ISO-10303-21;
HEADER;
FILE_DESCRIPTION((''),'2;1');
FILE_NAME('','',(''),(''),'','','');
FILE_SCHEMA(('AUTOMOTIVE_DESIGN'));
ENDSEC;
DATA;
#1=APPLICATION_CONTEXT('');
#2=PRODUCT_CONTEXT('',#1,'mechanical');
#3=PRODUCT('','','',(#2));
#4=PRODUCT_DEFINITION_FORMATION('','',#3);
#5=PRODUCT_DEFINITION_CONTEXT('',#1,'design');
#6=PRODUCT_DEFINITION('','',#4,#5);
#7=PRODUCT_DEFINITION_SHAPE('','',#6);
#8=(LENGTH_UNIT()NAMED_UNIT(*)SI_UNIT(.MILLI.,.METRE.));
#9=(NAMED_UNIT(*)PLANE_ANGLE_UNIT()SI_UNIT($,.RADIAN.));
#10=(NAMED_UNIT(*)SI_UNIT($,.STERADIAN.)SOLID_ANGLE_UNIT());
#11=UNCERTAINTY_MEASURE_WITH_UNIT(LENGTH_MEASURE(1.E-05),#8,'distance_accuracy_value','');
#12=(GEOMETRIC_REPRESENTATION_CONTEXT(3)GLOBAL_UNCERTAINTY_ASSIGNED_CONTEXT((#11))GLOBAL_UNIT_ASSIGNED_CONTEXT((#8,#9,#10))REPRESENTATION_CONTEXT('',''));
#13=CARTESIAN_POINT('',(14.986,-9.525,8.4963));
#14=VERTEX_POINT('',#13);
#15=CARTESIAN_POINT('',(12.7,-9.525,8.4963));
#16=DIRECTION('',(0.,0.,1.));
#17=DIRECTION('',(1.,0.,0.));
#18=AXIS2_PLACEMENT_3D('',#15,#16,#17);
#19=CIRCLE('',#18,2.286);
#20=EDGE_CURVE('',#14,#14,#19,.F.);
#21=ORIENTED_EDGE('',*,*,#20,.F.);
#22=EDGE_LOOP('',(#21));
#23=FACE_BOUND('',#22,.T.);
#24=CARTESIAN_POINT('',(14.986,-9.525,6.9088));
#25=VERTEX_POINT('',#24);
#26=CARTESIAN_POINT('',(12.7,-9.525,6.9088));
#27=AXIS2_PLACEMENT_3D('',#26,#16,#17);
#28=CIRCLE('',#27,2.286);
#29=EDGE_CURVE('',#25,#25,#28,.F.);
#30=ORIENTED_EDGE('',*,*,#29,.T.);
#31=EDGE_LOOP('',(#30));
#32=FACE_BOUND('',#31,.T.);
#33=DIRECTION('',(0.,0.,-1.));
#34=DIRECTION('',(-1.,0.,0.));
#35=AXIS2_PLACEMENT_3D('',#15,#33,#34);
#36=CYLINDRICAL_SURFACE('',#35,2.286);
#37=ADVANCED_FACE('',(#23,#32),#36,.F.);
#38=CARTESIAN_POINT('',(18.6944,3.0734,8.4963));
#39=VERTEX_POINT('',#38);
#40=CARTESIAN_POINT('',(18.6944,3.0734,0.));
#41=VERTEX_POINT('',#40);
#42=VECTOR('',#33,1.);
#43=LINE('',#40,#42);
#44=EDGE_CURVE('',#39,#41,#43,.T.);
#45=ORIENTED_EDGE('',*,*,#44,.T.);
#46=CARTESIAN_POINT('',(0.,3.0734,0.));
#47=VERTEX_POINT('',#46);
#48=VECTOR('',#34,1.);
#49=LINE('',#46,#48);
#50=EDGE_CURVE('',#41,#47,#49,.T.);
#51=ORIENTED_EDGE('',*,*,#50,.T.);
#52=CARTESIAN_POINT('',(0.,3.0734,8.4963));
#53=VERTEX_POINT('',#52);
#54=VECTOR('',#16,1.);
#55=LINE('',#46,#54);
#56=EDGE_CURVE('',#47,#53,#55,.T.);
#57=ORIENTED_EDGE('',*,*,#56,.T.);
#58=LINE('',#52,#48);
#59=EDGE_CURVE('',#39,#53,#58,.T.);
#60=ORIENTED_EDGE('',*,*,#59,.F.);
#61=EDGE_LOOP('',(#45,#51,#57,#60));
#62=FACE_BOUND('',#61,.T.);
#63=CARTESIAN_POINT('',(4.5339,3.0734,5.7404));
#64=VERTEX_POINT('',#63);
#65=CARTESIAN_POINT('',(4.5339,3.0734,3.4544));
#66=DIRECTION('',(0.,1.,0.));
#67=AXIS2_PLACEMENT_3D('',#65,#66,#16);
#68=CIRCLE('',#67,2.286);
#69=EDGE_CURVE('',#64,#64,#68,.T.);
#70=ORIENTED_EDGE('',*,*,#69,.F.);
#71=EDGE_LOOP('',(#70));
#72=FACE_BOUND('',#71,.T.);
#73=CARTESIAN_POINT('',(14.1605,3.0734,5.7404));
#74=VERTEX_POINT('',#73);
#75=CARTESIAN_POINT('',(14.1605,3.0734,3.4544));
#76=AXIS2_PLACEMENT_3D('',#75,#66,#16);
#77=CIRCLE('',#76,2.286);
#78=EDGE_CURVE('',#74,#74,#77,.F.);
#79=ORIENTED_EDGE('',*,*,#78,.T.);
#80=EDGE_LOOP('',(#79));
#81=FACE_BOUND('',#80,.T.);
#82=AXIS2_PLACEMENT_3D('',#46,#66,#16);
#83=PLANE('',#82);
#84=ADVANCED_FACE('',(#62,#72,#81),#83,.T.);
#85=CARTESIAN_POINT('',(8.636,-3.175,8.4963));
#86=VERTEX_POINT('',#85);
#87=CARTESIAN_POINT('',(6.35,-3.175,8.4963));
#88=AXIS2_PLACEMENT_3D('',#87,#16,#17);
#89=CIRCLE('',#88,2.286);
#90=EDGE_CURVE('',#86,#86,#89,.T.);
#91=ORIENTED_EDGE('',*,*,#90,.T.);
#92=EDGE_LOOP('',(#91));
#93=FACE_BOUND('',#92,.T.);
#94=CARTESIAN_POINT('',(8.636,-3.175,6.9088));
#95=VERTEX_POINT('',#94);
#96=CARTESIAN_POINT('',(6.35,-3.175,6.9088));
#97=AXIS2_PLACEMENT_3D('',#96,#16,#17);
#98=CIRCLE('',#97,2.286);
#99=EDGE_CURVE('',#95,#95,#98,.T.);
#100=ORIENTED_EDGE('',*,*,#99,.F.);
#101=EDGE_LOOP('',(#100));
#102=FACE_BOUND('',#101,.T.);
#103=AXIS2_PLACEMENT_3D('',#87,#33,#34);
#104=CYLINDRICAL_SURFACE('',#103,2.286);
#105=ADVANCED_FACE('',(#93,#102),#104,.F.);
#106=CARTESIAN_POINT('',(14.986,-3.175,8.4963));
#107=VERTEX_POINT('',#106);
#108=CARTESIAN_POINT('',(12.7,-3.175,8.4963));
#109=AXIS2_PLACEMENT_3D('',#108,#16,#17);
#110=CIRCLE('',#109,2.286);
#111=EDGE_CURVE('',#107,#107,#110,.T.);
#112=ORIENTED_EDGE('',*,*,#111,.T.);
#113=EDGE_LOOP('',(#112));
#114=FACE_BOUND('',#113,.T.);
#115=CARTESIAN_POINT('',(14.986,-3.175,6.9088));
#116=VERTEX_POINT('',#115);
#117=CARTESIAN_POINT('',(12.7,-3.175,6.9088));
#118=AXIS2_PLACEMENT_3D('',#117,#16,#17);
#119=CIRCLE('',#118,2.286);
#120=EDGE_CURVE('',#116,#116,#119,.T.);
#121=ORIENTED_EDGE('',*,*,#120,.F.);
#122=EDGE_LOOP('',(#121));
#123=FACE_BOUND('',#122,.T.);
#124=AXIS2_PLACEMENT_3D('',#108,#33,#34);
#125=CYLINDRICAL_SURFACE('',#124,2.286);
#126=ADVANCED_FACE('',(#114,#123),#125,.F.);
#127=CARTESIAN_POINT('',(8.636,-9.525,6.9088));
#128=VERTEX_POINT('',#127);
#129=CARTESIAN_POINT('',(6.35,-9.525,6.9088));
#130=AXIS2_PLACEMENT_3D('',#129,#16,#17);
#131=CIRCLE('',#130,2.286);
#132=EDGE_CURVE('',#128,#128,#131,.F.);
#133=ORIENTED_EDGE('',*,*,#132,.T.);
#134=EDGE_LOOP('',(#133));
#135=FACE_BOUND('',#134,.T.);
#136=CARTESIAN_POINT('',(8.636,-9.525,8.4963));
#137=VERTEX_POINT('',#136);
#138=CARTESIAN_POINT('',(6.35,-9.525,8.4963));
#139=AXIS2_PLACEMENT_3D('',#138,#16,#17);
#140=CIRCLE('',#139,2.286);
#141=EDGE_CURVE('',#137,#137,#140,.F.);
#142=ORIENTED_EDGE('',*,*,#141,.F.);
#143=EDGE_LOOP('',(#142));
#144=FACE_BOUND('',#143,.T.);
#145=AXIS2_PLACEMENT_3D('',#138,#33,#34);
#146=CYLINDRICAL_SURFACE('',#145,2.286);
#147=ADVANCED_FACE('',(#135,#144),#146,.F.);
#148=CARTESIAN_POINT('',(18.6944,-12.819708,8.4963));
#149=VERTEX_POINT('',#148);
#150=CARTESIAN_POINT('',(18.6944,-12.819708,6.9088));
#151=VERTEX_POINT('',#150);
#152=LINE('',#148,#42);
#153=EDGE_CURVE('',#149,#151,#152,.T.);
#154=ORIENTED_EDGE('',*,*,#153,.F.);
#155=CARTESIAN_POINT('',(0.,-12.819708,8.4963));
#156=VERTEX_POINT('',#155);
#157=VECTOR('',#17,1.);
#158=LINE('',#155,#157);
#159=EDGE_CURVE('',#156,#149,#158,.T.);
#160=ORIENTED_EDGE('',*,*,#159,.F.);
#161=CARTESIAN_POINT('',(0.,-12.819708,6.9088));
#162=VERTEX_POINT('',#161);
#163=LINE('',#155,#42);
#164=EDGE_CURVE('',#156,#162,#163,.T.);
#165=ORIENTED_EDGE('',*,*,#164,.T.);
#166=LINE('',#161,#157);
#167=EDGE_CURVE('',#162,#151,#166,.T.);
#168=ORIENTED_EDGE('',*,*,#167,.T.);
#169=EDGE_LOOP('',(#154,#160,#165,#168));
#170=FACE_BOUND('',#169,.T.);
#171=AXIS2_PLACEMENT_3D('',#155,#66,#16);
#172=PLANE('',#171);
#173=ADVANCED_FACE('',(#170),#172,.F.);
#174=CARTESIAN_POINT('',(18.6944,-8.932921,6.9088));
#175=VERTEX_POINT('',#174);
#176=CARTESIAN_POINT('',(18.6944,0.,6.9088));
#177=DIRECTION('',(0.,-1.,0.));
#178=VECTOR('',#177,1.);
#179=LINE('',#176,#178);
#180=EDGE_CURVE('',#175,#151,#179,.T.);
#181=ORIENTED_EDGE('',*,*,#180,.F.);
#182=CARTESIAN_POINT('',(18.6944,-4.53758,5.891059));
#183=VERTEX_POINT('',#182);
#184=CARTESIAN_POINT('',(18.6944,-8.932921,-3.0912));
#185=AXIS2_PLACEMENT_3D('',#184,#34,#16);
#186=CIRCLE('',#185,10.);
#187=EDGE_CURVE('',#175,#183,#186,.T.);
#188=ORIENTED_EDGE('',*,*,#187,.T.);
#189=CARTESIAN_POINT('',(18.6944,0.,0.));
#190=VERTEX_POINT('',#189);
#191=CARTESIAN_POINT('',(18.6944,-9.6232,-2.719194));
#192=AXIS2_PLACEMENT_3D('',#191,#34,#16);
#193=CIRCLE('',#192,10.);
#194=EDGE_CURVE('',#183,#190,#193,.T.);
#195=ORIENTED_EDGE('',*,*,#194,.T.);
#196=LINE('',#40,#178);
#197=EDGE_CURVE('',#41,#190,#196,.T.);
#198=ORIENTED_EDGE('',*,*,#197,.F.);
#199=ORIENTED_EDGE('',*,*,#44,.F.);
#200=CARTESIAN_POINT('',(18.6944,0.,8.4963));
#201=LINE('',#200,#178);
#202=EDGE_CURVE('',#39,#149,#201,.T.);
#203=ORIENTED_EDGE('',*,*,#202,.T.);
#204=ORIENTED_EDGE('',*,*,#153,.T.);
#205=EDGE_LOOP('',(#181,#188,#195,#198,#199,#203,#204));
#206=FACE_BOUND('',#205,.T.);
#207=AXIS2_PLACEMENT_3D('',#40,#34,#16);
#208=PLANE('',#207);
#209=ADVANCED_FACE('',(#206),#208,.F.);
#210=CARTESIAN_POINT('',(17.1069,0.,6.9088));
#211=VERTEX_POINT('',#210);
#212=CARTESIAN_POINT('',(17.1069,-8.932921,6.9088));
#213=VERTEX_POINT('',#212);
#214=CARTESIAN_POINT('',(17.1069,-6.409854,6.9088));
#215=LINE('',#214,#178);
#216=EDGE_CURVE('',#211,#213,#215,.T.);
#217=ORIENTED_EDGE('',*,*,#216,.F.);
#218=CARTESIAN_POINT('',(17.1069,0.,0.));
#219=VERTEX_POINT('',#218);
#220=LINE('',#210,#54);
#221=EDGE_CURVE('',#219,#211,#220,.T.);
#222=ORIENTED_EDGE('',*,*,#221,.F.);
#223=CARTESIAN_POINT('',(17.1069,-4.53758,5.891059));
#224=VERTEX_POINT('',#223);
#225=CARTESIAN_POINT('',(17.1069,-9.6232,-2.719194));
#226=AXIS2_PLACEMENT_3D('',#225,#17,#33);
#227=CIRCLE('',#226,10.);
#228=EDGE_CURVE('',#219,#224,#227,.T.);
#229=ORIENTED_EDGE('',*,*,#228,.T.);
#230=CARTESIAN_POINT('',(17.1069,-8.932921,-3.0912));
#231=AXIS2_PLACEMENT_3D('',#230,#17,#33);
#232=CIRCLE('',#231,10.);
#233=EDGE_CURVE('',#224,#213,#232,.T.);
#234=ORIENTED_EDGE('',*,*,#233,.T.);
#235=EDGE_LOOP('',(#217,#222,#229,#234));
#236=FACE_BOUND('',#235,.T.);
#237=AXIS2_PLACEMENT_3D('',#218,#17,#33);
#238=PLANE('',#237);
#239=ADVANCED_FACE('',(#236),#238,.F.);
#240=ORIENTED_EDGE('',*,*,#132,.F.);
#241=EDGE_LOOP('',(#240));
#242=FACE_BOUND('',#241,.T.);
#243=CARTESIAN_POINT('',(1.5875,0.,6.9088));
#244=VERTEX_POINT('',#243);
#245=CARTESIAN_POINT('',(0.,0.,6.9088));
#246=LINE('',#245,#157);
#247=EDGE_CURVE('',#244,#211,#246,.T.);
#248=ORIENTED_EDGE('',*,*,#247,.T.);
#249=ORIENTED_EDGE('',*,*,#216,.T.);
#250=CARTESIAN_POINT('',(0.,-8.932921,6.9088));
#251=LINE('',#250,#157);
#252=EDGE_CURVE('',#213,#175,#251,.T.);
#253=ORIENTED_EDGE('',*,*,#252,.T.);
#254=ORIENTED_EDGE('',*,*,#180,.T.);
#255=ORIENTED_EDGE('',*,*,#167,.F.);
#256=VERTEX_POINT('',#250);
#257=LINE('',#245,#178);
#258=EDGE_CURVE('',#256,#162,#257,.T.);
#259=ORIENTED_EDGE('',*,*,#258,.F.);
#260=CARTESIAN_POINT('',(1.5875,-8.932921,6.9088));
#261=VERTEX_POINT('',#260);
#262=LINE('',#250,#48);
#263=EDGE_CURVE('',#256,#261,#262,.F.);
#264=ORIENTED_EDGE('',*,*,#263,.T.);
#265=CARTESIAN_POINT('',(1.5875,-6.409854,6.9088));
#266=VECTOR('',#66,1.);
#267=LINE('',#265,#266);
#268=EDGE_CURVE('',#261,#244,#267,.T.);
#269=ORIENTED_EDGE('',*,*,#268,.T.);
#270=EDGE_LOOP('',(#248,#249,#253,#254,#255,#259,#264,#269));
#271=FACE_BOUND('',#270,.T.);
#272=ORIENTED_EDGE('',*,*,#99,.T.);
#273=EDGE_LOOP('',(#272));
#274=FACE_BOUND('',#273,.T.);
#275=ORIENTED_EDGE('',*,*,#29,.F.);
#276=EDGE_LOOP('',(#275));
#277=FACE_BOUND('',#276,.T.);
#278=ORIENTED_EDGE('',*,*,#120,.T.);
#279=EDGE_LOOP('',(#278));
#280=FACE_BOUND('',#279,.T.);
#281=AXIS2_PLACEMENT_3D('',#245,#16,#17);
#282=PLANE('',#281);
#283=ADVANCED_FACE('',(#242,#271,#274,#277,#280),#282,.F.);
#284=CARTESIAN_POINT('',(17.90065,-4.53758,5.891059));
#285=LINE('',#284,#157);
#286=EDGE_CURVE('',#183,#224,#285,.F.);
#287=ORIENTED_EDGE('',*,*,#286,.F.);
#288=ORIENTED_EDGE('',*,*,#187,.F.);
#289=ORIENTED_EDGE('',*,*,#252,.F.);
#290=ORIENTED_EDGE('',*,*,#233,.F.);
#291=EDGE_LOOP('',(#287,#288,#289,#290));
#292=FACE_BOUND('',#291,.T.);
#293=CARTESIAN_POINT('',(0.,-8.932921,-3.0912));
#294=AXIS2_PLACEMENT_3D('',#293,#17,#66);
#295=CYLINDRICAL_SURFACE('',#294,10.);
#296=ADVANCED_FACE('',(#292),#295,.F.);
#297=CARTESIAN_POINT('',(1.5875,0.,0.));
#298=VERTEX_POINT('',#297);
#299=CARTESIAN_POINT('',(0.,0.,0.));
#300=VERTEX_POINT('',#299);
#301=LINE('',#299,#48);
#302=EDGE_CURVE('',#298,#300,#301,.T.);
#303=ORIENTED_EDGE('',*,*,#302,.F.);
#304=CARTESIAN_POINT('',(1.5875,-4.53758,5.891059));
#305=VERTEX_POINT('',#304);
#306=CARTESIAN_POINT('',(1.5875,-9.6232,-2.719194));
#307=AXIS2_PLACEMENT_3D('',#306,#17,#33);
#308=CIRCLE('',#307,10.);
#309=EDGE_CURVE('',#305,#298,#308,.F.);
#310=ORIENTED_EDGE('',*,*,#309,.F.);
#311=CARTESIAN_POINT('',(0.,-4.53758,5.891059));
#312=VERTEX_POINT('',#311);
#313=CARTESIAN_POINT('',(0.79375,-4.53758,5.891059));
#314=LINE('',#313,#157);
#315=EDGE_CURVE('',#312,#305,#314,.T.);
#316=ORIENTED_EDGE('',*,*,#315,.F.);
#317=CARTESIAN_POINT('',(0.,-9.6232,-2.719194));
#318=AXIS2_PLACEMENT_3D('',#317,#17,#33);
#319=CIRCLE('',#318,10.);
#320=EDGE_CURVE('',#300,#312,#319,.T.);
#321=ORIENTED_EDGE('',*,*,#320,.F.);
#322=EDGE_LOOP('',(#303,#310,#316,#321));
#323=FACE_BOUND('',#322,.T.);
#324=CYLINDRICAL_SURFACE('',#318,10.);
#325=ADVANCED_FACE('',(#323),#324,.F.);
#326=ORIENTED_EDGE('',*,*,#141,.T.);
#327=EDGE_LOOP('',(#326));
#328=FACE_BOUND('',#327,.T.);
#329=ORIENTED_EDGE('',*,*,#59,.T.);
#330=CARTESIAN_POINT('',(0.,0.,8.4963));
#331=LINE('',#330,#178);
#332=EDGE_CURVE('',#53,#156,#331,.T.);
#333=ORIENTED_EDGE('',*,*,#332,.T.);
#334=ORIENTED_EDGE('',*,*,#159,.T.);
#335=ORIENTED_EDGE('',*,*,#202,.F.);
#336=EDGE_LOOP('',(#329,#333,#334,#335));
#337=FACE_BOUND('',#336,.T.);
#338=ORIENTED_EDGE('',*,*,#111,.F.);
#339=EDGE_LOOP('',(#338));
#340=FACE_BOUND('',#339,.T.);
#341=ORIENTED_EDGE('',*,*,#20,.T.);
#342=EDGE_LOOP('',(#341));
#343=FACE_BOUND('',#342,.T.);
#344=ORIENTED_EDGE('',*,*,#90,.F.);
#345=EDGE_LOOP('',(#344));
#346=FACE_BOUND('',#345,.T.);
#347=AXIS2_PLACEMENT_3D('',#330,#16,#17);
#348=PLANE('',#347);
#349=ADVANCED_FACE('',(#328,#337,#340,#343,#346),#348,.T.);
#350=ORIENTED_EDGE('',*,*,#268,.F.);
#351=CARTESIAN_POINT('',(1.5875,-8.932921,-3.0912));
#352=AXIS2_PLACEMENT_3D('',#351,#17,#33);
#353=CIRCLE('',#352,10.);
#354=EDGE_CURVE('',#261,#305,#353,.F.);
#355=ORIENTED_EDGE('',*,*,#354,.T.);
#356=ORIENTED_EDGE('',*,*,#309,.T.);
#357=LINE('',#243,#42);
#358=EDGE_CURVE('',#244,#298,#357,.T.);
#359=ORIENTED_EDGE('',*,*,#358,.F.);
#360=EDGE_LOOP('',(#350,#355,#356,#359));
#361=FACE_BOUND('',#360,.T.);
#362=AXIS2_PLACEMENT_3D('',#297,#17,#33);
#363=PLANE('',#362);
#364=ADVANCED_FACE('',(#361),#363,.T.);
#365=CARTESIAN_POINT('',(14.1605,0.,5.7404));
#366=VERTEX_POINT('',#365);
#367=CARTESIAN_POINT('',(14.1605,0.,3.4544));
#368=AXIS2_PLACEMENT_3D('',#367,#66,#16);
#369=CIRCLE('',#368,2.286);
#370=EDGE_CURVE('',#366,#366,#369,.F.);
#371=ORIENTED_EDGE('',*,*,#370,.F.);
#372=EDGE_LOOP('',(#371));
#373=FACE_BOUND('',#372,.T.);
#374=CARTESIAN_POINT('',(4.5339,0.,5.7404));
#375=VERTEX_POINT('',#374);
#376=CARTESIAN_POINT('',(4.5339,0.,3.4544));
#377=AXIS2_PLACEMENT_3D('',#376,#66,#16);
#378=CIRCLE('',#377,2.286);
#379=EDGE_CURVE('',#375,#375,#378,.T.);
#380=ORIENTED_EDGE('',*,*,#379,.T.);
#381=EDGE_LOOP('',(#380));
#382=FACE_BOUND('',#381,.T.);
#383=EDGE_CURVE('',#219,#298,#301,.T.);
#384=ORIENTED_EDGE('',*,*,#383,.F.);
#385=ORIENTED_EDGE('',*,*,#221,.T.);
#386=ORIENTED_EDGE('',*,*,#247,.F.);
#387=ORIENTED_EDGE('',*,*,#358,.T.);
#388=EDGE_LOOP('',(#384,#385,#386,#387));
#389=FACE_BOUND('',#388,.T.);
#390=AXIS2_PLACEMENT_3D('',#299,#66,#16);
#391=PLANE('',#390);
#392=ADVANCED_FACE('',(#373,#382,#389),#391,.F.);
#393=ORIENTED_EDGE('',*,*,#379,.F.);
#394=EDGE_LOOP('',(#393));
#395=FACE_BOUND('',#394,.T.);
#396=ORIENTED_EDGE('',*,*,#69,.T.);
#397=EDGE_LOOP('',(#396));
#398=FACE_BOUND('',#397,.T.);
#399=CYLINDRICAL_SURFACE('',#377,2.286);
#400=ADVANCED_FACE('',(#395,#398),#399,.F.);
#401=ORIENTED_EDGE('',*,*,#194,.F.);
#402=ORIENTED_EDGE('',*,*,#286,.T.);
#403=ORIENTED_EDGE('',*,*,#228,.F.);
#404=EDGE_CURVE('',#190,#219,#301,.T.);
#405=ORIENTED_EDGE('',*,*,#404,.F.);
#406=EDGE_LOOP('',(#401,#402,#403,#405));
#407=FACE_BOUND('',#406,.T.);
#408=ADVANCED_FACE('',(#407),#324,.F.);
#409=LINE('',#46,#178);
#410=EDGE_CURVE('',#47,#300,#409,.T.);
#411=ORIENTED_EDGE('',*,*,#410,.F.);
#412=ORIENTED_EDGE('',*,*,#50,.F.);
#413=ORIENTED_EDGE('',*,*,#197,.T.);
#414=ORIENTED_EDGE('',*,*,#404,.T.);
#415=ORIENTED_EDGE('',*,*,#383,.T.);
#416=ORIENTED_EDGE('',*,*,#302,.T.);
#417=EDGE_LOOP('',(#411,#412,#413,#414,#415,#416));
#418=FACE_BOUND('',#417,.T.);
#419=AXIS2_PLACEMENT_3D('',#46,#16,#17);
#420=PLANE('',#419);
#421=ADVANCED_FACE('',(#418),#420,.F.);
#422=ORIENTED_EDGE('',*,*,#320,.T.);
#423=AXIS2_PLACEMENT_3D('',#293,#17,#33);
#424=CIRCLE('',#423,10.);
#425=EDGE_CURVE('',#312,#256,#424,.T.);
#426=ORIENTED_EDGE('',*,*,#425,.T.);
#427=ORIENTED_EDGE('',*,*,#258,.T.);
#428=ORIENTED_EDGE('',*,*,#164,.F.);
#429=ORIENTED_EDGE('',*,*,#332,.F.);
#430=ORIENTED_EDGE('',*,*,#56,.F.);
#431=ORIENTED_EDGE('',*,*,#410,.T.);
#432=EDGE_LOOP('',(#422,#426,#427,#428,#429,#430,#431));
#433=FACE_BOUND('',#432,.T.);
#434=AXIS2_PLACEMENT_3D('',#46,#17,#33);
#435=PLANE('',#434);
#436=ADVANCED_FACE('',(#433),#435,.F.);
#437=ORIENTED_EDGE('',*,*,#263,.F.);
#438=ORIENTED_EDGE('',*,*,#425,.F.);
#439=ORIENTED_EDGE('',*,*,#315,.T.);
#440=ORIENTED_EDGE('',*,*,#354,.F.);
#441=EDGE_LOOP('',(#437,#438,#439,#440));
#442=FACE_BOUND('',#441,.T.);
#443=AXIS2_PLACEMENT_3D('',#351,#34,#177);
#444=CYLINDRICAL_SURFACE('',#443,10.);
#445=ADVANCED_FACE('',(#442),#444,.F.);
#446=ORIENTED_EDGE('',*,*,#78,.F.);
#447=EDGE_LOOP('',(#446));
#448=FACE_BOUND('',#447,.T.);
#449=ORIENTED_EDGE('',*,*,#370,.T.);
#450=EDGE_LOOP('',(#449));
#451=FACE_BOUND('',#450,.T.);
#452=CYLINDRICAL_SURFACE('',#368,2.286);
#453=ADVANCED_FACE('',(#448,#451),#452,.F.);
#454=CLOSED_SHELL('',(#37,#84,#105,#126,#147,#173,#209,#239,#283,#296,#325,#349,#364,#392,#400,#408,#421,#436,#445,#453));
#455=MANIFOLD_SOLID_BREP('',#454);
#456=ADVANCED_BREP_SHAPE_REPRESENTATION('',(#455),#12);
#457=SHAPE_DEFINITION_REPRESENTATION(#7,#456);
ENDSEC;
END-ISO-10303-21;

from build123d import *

# Parameters (mm, degrees)
SKETCH1_W           = 18.6944
SKETCH1_H           = 6.9088
BOSS_EXTRUDE1_DEPTH = 3.0734
SKETCH2_R           = 2.286
CUT_EXTRUDE1_DEPTH  = 3.0734
SKETCH3_W           = 18.6944
SKETCH3_H           = 15.893108249
SKETCH3_R           = 2.286
BOSS_EXTRUDE3_DEPTH = 1.5875
BOSS_EXTRUDE4_DEPTH = 1.5875
BOSS_EXTRUDE5_DEPTH = 1.5875
FILLET1_R           = 10


with BuildPart() as part:
    # Sketch1 → Boss-Extrude1 (new body)
    with BuildSketch(Plane(origin=(0, 0, 0), x_dir=(1, 0, 0), z_dir=(0, 1, 0))):
        with Locations((9.3472, -3.4544)):
            Rectangle(SKETCH1_W, SKETCH1_H)
    extrude(amount=BOSS_EXTRUDE1_DEPTH)

    # Sketch2 → Cut-Extrude1 (cut)
    with BuildSketch(Plane(origin=(0, 3.0734, 0), x_dir=(1, 0, 0), z_dir=(0, 1, 0))):
        with Locations(Location((4.5339, -3.4544, 0), (0, 0, 270))):
            Circle(SKETCH2_R)
        with Locations(Location((14.1605, -3.4544, 0), (0, 0, 270))):
            Circle(SKETCH2_R)
    extrude(amount=-CUT_EXTRUDE1_DEPTH, mode=Mode.SUBTRACT)

    # Sketch3 → Boss-Extrude3 (add)
    with BuildSketch(Plane.XY.offset(6.9088)):
        with Locations((9.3472, -4.873154125)):
            Rectangle(SKETCH3_W, SKETCH3_H)
        with Locations((12.7, -9.525)):
            Circle(SKETCH3_R, mode=Mode.SUBTRACT)
        with Locations((6.35, -9.525)):
            Circle(SKETCH3_R, mode=Mode.SUBTRACT)
        with Locations((12.7, -3.175)):
            Circle(SKETCH3_R, mode=Mode.SUBTRACT)
        with Locations((6.35, -3.175)):
            Circle(SKETCH3_R, mode=Mode.SUBTRACT)
    extrude(amount=BOSS_EXTRUDE3_DEPTH)

    # Sketch4 → Boss-Extrude4 (add)
    with BuildSketch(Plane.ZY):
        Polygon((3.4544, 0), (6.9088, -6.409854124), (6.9088, 0), align=None)
    extrude(amount=-BOSS_EXTRUDE4_DEPTH)

    # Sketch5 → Boss-Extrude5 (add)
    with BuildSketch(Plane(origin=(18.6944, 0, 0), x_dir=(0, 0, -1), z_dir=(1, 0, 0))):
        Polygon((-3.4544, 0), (-6.9088, -6.409854124), (-6.9088, 0), align=None)
    extrude(amount=-BOSS_EXTRUDE5_DEPTH)

    # Fillet1
    # the kernel refuses this fillet: 10 mm, written as the material it adds along each edge
    with BuildSketch(Plane(origin=(0, -6.409854124, 6.9088), x_dir=(0, 0.8803024942448967, -0.4744128145678757), z_dir=(1, 0, 0)), Plane(origin=(18.6944, -6.409854124, 6.9088), x_dir=(0, -1, 0), z_dir=(-1, 0, 0))) as fillet1_piece_1:
        with BuildLine():
            CenterArc((FILLET1_R * 0.252306645351, -FILLET1_R), FILLET1_R, 90, 28.321125328)
            Line((-FILLET1_R * 0.222106169217, -FILLET1_R * 0.119697505755), (-FILLET1_R * 0.231594425508, -FILLET1_R * 0.10209145587))
            Line((-FILLET1_R * 0.231594425508, -FILLET1_R * 0.10209145587), (-FILLET1_R * 0.00504613290702, FILLET1_R * 0.02))
            Line((-FILLET1_R * 0.00504613290702, FILLET1_R * 0.02), (FILLET1_R * 0.252306645351, FILLET1_R * 0.02))
            Line((FILLET1_R * 0.252306645351, FILLET1_R * 0.02), (FILLET1_R * 0.252306645351, 0))
        make_face()
    extrude(amount=1.5875)
    with BuildSketch(Plane(origin=(0, 0, 3.4544), x_dir=(0, 0, -1), z_dir=(1, 0, 0))) as fillet1_piece_2:
        with BuildLine():
            CenterArc((6.173594354, -9.623200199), FILLET1_R, 105.778516421, 45.90035825)
            Line((-2.629430588, -4.879072053), (-2.805491087, -4.78418949))
            Line((-2.805491087, -4.78418949), (-0.176060499, 0.094882563))
            Line((-0.176060499, 0.094882563), (0, 0.2))
            ThreePointArc((0, 0.2), (1.7272, 0.2), (3.400016113, 0.192464004))
            Line((3.400016113, 0.192464004), (3.4544, 0))
        make_face()
    extrude(amount=1.5875)
    with BuildSketch(Plane(origin=(18.6944, 0, 3.4544), x_dir=(0, 0, -1), z_dir=(-1, 0, 0))) as fillet1_piece_3:
        with BuildLine():
            CenterArc((6.173594354, 9.623200199), FILLET1_R, 208.321125328, 45.90035825)
            Line((-2.629430588, 4.879072053), (-2.805491087, 4.78418949))
            Line((-2.805491087, 4.78418949), (-0.176060499, -0.094882563))
            Line((-0.176060499, -0.094882563), (0, -0.2))
            ThreePointArc((0, -0.2), (1.7272, -0.2), (3.400016113, -0.192464004))
            Line((3.400016113, -0.192464004), (3.4544, 0))
        make_face()
    extrude(amount=1.5875)


solid = part.part
